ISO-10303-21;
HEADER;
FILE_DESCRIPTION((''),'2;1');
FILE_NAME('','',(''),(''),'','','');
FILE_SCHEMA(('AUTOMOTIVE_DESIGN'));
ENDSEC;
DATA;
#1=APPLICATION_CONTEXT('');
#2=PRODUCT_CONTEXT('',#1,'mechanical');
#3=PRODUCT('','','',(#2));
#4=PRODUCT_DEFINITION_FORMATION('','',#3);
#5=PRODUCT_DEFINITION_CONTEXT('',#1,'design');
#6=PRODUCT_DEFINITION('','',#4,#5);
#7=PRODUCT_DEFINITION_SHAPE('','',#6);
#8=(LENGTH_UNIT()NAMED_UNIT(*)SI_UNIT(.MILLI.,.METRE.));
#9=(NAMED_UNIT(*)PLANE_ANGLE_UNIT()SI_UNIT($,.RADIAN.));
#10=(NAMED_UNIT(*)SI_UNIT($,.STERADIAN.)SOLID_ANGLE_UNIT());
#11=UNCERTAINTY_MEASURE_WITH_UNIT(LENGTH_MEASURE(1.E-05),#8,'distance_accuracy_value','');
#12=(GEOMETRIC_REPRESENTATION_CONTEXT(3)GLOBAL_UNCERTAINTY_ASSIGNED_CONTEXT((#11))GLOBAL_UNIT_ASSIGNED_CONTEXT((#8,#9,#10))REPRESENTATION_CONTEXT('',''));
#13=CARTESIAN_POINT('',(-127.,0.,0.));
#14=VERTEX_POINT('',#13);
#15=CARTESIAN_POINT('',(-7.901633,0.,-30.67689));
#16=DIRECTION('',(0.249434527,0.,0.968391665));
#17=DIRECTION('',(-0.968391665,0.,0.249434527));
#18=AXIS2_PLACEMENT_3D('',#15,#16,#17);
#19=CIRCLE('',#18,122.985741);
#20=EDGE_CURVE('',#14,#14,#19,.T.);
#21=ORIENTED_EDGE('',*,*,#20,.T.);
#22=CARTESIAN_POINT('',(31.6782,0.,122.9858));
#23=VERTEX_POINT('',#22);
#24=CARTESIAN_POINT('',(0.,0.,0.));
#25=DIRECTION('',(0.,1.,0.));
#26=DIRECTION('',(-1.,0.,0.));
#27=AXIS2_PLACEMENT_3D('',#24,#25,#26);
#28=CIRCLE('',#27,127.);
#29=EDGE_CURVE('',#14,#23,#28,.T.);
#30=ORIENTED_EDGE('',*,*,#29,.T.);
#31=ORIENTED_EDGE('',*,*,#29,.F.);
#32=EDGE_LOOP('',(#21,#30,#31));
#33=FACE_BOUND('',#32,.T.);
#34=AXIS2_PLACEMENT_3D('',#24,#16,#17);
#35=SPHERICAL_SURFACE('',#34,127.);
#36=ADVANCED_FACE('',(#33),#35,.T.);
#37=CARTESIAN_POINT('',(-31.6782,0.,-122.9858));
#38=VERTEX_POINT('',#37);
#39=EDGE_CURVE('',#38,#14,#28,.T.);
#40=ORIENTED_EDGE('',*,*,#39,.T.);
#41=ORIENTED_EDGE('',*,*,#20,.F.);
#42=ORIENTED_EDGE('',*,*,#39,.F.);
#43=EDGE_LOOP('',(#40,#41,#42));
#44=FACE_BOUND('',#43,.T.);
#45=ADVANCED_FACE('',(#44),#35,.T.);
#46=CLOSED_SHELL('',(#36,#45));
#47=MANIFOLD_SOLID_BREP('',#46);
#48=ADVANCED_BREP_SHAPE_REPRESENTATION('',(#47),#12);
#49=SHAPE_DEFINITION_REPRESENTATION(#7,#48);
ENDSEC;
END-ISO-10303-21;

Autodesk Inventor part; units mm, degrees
ref_plane "XY Plane" through (0, 0, 0) normal (0, 0, 1) x (1, 0, 0)
sketch "Sketch1" plane through (0, 0, 0) normal (0, 1, 0) x (-1, 0, 0)
  circle A0 centre (0, 0) radius 127
  line L0 (31.6782, -122.9858) -> (-31.6782, 122.9858)
  dimension "d0" = 254
revolve "Revolution1" add sketch "Sketch1" angle 360 about axis through (-31.6782, 0, -122.9858) along (0.2494343, 0, 0.9683917) picked at (76.7989, -23.9961) contours A0 L0
ref_plane "Work Plane2" through (0, -127, 0) normal (0, 1, 0) x (-1, 0, 0)
ref_plane "Work Plane1" through (0, 127, 0) normal (0, 1, 0) x (-1, 0, 0)
ref_plane "Work Plane3" through (127, 0, 0) normal (1, 0, 0) x (0, 1, 0)
ref_plane "Work Plane5" through (-127, 0, 0) normal (1, 0, 0) x (0, 1, 0)
properties part number "Ball"
